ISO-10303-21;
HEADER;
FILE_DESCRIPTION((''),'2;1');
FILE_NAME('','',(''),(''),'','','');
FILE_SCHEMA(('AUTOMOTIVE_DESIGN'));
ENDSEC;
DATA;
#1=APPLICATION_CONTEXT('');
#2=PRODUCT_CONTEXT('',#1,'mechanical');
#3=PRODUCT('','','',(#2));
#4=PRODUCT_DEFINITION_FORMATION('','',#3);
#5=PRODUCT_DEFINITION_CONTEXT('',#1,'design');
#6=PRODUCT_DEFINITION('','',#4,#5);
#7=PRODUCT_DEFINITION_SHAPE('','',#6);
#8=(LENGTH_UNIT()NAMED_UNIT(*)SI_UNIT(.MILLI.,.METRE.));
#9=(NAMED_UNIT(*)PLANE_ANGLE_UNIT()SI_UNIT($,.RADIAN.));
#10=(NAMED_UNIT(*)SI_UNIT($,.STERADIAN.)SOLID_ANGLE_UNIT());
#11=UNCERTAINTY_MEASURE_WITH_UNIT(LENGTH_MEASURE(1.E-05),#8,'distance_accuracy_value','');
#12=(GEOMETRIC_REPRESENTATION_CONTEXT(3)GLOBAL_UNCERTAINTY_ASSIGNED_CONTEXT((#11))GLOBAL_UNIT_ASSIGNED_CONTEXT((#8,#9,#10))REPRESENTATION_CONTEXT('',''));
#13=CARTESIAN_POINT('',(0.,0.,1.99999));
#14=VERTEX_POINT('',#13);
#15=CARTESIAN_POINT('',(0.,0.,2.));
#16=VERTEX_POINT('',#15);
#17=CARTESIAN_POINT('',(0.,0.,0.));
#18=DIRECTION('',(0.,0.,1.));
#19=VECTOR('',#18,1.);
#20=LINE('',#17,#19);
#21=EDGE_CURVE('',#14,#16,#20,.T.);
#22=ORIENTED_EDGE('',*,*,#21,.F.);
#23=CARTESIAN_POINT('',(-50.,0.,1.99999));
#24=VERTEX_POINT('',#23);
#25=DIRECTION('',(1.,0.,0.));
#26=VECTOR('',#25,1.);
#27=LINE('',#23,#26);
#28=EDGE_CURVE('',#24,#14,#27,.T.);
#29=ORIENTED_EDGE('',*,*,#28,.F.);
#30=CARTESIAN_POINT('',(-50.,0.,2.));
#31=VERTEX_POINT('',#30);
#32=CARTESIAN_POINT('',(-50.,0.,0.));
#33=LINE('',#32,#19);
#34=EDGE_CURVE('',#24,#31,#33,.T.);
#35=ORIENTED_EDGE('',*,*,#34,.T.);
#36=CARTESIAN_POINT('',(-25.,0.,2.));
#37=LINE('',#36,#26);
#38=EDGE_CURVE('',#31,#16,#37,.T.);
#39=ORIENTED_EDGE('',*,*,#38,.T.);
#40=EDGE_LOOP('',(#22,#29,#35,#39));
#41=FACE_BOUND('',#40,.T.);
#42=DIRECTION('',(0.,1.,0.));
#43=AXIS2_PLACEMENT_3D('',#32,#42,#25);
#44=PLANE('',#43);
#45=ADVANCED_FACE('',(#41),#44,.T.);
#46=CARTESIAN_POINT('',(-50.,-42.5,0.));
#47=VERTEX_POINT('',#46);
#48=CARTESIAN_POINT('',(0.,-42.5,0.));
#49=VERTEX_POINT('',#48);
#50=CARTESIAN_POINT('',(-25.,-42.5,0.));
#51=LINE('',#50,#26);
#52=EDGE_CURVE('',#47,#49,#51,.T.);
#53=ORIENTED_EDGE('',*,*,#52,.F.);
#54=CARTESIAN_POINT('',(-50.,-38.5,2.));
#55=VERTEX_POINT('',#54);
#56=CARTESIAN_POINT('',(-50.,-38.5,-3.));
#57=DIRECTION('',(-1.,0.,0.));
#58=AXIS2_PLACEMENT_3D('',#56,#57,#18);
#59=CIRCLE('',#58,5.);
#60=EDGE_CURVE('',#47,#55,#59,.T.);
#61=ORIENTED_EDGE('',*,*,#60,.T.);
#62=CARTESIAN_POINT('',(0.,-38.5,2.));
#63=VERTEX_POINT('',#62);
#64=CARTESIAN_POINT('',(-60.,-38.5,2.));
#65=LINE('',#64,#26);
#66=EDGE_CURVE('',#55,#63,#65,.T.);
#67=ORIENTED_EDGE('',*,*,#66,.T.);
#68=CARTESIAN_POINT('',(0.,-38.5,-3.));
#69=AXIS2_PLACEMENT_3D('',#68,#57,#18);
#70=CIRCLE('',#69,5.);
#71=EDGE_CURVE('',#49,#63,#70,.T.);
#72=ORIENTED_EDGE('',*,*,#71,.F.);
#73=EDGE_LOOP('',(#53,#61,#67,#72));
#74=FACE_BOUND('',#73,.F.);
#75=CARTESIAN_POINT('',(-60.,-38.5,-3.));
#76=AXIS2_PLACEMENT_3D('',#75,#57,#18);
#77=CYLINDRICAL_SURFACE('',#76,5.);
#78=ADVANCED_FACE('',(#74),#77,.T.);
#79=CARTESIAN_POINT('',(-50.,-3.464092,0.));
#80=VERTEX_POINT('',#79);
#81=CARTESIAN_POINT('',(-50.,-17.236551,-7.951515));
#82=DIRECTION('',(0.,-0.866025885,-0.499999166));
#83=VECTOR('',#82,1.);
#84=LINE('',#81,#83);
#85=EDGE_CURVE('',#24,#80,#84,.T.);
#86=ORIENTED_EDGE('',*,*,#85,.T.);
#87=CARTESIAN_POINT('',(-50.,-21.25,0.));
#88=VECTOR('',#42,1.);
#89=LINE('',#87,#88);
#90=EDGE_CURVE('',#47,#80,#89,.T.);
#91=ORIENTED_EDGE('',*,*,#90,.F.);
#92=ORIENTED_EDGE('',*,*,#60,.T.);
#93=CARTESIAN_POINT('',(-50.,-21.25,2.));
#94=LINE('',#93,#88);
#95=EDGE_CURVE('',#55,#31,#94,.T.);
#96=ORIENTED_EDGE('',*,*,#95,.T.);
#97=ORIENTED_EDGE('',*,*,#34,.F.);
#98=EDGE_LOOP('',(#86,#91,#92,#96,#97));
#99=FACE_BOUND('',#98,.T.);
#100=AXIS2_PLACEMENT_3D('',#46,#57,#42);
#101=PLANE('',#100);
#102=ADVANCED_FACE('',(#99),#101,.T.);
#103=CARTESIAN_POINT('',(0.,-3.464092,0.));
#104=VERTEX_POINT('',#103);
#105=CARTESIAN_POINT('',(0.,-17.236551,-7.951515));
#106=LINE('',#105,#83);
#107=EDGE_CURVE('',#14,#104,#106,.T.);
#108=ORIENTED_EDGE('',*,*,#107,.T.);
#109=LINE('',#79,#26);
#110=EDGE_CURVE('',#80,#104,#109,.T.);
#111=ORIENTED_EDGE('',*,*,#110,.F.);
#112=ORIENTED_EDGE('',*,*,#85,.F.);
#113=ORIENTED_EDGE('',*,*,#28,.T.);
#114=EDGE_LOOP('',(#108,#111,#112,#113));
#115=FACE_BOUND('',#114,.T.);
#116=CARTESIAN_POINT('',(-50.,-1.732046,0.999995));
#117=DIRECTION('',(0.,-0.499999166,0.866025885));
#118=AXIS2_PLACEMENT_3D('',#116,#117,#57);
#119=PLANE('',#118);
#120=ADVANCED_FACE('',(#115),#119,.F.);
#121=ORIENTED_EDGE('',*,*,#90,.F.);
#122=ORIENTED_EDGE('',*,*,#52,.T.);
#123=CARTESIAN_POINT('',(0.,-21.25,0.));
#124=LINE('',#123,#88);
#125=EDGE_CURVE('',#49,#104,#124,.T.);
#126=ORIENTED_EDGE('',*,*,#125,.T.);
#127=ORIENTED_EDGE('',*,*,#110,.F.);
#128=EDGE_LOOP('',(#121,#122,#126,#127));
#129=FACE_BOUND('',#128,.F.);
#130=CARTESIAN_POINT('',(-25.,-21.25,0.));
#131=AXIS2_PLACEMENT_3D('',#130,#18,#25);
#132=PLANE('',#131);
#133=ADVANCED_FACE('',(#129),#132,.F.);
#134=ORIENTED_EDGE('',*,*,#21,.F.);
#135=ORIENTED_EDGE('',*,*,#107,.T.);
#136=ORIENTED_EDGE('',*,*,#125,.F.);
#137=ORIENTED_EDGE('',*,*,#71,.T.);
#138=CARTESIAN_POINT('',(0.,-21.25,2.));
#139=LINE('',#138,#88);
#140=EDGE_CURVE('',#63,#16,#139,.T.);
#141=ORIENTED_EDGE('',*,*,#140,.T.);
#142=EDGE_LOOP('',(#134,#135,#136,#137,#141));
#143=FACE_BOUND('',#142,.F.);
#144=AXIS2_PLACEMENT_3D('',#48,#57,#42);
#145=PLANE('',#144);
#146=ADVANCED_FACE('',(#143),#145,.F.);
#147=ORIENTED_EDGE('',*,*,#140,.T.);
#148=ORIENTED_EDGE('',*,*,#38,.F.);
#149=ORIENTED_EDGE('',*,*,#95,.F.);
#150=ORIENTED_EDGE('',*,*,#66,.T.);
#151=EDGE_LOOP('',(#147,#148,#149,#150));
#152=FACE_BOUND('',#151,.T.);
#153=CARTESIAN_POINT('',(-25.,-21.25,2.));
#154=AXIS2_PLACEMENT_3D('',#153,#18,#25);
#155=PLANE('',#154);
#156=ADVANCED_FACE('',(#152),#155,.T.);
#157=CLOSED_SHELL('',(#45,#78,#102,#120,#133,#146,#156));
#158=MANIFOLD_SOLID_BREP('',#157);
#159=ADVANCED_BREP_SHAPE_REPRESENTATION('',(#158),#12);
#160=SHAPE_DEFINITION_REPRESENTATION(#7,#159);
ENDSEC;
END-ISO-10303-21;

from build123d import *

# Parameters (mm, degrees)
F0_W        = 50
F0_H        = 42.5
F1_DEPTH    = 2
F2_SIZE2    = 3.464092
F2_SIZE     = 1.99999
F3_T1_DEPTH = 70


# Not quite as in the source:
# - a fillet or chamfer that OpenCascade refuses, or shapes differently, is made with other operations: its cross-section is extruded or revolved along the edge and cut away or added
# - a fillet or chamfer is up to 0.001 mm smaller than in the source, because OpenCascade refuses the exact size


with BuildPart() as f1:
    # F0 (on Top) → F1 (new body)
    with BuildSketch(Plane.XY):
        with Locations((-25, -21.25)):
            Rectangle(F0_W, F0_H)
    extrude(amount=F1_DEPTH)

    # F2 (size 2 and 3.4641016151 in the source; OpenCascade refuses exactly that, so slightly less here)
    f2_edges = [f1.edges().sort_by_distance(p)[0] for p in [
        (-25, 0, 0),
    ]]
    f2_side = f1.faces().sort_by_distance((-25, 0, 1))[0]
    chamfer(f2_edges, length=F2_SIZE, length2=F2_SIZE2, reference=f2_side)

    # F3: fillet of radius 5 on 1 edges, made by hand

    # F3_s2 → F3_t1 (cut)
    with BuildSketch(Plane.YZ.offset(-60)):
        with BuildLine():
            ThreePointArc((-38.5, 2), (-40.7360679775, 1.472135955), (-42.5, 0))
            Line((-42.5, 0), (-42.5, 2))
            Line((-42.5, 2), (-38.5, 2))
        make_face()
    extrude(amount=F3_T1_DEPTH, mode=Mode.SUBTRACT)


solid = f1.part
